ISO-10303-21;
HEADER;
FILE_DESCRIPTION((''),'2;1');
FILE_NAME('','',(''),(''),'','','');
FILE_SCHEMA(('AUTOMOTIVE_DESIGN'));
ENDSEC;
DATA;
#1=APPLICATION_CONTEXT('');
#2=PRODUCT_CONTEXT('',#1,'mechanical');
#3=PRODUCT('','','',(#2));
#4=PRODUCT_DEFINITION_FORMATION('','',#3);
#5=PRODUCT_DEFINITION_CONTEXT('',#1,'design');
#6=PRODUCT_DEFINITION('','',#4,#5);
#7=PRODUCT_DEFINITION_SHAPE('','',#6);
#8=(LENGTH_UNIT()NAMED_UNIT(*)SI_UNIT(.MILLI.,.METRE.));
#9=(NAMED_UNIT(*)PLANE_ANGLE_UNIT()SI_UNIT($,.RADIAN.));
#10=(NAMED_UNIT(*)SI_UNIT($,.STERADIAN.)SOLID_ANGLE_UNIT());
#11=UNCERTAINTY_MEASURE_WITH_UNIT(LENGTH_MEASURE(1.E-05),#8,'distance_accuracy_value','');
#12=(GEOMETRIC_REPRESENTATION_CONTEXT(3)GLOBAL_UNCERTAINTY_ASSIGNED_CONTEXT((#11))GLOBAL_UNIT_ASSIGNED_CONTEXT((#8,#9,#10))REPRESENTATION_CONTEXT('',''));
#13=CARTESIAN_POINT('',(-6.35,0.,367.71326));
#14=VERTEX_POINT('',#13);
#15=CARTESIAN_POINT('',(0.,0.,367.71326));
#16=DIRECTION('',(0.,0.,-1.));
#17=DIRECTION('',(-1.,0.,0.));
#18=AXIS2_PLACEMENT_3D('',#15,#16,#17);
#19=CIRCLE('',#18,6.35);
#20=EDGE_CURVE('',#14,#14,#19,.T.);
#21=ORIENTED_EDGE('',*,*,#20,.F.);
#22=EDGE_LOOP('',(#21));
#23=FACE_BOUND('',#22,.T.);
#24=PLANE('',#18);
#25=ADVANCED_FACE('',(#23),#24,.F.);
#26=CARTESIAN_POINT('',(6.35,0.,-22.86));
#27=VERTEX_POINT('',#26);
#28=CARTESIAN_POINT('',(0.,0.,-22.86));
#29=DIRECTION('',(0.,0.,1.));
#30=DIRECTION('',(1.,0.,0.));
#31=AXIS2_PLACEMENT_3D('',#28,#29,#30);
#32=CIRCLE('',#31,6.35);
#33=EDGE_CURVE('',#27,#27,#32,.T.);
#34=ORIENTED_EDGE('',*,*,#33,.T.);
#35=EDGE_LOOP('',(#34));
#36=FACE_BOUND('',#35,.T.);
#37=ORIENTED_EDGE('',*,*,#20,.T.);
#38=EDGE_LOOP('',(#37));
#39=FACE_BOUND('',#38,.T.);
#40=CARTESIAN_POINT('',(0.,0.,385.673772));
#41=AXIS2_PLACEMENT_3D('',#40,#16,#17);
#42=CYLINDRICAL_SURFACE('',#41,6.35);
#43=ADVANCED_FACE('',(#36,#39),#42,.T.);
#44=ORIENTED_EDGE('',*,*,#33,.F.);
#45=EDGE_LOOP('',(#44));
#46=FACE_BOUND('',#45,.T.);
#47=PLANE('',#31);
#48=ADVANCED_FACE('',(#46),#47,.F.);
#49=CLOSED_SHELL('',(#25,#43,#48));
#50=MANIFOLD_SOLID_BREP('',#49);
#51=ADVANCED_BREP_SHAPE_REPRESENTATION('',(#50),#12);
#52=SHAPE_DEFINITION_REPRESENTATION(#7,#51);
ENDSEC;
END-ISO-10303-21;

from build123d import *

# Parameters (mm, degrees)
BOSS_EXTRUDE1_OUTLINE_R = 6.35
BOSS_EXTRUDE1_DEPTH     = 390.57326


# Read off the part's stored shape, not the designer's step: Boss-Extrude1
with BuildPart() as part:
    # Boss-Extrude1 outline → Boss-Extrude1 (new body)
    with BuildSketch(Plane.XY.offset(-22.86)):
        Circle(BOSS_EXTRUDE1_OUTLINE_R)
    extrude(amount=BOSS_EXTRUDE1_DEPTH)


solid = part.part
